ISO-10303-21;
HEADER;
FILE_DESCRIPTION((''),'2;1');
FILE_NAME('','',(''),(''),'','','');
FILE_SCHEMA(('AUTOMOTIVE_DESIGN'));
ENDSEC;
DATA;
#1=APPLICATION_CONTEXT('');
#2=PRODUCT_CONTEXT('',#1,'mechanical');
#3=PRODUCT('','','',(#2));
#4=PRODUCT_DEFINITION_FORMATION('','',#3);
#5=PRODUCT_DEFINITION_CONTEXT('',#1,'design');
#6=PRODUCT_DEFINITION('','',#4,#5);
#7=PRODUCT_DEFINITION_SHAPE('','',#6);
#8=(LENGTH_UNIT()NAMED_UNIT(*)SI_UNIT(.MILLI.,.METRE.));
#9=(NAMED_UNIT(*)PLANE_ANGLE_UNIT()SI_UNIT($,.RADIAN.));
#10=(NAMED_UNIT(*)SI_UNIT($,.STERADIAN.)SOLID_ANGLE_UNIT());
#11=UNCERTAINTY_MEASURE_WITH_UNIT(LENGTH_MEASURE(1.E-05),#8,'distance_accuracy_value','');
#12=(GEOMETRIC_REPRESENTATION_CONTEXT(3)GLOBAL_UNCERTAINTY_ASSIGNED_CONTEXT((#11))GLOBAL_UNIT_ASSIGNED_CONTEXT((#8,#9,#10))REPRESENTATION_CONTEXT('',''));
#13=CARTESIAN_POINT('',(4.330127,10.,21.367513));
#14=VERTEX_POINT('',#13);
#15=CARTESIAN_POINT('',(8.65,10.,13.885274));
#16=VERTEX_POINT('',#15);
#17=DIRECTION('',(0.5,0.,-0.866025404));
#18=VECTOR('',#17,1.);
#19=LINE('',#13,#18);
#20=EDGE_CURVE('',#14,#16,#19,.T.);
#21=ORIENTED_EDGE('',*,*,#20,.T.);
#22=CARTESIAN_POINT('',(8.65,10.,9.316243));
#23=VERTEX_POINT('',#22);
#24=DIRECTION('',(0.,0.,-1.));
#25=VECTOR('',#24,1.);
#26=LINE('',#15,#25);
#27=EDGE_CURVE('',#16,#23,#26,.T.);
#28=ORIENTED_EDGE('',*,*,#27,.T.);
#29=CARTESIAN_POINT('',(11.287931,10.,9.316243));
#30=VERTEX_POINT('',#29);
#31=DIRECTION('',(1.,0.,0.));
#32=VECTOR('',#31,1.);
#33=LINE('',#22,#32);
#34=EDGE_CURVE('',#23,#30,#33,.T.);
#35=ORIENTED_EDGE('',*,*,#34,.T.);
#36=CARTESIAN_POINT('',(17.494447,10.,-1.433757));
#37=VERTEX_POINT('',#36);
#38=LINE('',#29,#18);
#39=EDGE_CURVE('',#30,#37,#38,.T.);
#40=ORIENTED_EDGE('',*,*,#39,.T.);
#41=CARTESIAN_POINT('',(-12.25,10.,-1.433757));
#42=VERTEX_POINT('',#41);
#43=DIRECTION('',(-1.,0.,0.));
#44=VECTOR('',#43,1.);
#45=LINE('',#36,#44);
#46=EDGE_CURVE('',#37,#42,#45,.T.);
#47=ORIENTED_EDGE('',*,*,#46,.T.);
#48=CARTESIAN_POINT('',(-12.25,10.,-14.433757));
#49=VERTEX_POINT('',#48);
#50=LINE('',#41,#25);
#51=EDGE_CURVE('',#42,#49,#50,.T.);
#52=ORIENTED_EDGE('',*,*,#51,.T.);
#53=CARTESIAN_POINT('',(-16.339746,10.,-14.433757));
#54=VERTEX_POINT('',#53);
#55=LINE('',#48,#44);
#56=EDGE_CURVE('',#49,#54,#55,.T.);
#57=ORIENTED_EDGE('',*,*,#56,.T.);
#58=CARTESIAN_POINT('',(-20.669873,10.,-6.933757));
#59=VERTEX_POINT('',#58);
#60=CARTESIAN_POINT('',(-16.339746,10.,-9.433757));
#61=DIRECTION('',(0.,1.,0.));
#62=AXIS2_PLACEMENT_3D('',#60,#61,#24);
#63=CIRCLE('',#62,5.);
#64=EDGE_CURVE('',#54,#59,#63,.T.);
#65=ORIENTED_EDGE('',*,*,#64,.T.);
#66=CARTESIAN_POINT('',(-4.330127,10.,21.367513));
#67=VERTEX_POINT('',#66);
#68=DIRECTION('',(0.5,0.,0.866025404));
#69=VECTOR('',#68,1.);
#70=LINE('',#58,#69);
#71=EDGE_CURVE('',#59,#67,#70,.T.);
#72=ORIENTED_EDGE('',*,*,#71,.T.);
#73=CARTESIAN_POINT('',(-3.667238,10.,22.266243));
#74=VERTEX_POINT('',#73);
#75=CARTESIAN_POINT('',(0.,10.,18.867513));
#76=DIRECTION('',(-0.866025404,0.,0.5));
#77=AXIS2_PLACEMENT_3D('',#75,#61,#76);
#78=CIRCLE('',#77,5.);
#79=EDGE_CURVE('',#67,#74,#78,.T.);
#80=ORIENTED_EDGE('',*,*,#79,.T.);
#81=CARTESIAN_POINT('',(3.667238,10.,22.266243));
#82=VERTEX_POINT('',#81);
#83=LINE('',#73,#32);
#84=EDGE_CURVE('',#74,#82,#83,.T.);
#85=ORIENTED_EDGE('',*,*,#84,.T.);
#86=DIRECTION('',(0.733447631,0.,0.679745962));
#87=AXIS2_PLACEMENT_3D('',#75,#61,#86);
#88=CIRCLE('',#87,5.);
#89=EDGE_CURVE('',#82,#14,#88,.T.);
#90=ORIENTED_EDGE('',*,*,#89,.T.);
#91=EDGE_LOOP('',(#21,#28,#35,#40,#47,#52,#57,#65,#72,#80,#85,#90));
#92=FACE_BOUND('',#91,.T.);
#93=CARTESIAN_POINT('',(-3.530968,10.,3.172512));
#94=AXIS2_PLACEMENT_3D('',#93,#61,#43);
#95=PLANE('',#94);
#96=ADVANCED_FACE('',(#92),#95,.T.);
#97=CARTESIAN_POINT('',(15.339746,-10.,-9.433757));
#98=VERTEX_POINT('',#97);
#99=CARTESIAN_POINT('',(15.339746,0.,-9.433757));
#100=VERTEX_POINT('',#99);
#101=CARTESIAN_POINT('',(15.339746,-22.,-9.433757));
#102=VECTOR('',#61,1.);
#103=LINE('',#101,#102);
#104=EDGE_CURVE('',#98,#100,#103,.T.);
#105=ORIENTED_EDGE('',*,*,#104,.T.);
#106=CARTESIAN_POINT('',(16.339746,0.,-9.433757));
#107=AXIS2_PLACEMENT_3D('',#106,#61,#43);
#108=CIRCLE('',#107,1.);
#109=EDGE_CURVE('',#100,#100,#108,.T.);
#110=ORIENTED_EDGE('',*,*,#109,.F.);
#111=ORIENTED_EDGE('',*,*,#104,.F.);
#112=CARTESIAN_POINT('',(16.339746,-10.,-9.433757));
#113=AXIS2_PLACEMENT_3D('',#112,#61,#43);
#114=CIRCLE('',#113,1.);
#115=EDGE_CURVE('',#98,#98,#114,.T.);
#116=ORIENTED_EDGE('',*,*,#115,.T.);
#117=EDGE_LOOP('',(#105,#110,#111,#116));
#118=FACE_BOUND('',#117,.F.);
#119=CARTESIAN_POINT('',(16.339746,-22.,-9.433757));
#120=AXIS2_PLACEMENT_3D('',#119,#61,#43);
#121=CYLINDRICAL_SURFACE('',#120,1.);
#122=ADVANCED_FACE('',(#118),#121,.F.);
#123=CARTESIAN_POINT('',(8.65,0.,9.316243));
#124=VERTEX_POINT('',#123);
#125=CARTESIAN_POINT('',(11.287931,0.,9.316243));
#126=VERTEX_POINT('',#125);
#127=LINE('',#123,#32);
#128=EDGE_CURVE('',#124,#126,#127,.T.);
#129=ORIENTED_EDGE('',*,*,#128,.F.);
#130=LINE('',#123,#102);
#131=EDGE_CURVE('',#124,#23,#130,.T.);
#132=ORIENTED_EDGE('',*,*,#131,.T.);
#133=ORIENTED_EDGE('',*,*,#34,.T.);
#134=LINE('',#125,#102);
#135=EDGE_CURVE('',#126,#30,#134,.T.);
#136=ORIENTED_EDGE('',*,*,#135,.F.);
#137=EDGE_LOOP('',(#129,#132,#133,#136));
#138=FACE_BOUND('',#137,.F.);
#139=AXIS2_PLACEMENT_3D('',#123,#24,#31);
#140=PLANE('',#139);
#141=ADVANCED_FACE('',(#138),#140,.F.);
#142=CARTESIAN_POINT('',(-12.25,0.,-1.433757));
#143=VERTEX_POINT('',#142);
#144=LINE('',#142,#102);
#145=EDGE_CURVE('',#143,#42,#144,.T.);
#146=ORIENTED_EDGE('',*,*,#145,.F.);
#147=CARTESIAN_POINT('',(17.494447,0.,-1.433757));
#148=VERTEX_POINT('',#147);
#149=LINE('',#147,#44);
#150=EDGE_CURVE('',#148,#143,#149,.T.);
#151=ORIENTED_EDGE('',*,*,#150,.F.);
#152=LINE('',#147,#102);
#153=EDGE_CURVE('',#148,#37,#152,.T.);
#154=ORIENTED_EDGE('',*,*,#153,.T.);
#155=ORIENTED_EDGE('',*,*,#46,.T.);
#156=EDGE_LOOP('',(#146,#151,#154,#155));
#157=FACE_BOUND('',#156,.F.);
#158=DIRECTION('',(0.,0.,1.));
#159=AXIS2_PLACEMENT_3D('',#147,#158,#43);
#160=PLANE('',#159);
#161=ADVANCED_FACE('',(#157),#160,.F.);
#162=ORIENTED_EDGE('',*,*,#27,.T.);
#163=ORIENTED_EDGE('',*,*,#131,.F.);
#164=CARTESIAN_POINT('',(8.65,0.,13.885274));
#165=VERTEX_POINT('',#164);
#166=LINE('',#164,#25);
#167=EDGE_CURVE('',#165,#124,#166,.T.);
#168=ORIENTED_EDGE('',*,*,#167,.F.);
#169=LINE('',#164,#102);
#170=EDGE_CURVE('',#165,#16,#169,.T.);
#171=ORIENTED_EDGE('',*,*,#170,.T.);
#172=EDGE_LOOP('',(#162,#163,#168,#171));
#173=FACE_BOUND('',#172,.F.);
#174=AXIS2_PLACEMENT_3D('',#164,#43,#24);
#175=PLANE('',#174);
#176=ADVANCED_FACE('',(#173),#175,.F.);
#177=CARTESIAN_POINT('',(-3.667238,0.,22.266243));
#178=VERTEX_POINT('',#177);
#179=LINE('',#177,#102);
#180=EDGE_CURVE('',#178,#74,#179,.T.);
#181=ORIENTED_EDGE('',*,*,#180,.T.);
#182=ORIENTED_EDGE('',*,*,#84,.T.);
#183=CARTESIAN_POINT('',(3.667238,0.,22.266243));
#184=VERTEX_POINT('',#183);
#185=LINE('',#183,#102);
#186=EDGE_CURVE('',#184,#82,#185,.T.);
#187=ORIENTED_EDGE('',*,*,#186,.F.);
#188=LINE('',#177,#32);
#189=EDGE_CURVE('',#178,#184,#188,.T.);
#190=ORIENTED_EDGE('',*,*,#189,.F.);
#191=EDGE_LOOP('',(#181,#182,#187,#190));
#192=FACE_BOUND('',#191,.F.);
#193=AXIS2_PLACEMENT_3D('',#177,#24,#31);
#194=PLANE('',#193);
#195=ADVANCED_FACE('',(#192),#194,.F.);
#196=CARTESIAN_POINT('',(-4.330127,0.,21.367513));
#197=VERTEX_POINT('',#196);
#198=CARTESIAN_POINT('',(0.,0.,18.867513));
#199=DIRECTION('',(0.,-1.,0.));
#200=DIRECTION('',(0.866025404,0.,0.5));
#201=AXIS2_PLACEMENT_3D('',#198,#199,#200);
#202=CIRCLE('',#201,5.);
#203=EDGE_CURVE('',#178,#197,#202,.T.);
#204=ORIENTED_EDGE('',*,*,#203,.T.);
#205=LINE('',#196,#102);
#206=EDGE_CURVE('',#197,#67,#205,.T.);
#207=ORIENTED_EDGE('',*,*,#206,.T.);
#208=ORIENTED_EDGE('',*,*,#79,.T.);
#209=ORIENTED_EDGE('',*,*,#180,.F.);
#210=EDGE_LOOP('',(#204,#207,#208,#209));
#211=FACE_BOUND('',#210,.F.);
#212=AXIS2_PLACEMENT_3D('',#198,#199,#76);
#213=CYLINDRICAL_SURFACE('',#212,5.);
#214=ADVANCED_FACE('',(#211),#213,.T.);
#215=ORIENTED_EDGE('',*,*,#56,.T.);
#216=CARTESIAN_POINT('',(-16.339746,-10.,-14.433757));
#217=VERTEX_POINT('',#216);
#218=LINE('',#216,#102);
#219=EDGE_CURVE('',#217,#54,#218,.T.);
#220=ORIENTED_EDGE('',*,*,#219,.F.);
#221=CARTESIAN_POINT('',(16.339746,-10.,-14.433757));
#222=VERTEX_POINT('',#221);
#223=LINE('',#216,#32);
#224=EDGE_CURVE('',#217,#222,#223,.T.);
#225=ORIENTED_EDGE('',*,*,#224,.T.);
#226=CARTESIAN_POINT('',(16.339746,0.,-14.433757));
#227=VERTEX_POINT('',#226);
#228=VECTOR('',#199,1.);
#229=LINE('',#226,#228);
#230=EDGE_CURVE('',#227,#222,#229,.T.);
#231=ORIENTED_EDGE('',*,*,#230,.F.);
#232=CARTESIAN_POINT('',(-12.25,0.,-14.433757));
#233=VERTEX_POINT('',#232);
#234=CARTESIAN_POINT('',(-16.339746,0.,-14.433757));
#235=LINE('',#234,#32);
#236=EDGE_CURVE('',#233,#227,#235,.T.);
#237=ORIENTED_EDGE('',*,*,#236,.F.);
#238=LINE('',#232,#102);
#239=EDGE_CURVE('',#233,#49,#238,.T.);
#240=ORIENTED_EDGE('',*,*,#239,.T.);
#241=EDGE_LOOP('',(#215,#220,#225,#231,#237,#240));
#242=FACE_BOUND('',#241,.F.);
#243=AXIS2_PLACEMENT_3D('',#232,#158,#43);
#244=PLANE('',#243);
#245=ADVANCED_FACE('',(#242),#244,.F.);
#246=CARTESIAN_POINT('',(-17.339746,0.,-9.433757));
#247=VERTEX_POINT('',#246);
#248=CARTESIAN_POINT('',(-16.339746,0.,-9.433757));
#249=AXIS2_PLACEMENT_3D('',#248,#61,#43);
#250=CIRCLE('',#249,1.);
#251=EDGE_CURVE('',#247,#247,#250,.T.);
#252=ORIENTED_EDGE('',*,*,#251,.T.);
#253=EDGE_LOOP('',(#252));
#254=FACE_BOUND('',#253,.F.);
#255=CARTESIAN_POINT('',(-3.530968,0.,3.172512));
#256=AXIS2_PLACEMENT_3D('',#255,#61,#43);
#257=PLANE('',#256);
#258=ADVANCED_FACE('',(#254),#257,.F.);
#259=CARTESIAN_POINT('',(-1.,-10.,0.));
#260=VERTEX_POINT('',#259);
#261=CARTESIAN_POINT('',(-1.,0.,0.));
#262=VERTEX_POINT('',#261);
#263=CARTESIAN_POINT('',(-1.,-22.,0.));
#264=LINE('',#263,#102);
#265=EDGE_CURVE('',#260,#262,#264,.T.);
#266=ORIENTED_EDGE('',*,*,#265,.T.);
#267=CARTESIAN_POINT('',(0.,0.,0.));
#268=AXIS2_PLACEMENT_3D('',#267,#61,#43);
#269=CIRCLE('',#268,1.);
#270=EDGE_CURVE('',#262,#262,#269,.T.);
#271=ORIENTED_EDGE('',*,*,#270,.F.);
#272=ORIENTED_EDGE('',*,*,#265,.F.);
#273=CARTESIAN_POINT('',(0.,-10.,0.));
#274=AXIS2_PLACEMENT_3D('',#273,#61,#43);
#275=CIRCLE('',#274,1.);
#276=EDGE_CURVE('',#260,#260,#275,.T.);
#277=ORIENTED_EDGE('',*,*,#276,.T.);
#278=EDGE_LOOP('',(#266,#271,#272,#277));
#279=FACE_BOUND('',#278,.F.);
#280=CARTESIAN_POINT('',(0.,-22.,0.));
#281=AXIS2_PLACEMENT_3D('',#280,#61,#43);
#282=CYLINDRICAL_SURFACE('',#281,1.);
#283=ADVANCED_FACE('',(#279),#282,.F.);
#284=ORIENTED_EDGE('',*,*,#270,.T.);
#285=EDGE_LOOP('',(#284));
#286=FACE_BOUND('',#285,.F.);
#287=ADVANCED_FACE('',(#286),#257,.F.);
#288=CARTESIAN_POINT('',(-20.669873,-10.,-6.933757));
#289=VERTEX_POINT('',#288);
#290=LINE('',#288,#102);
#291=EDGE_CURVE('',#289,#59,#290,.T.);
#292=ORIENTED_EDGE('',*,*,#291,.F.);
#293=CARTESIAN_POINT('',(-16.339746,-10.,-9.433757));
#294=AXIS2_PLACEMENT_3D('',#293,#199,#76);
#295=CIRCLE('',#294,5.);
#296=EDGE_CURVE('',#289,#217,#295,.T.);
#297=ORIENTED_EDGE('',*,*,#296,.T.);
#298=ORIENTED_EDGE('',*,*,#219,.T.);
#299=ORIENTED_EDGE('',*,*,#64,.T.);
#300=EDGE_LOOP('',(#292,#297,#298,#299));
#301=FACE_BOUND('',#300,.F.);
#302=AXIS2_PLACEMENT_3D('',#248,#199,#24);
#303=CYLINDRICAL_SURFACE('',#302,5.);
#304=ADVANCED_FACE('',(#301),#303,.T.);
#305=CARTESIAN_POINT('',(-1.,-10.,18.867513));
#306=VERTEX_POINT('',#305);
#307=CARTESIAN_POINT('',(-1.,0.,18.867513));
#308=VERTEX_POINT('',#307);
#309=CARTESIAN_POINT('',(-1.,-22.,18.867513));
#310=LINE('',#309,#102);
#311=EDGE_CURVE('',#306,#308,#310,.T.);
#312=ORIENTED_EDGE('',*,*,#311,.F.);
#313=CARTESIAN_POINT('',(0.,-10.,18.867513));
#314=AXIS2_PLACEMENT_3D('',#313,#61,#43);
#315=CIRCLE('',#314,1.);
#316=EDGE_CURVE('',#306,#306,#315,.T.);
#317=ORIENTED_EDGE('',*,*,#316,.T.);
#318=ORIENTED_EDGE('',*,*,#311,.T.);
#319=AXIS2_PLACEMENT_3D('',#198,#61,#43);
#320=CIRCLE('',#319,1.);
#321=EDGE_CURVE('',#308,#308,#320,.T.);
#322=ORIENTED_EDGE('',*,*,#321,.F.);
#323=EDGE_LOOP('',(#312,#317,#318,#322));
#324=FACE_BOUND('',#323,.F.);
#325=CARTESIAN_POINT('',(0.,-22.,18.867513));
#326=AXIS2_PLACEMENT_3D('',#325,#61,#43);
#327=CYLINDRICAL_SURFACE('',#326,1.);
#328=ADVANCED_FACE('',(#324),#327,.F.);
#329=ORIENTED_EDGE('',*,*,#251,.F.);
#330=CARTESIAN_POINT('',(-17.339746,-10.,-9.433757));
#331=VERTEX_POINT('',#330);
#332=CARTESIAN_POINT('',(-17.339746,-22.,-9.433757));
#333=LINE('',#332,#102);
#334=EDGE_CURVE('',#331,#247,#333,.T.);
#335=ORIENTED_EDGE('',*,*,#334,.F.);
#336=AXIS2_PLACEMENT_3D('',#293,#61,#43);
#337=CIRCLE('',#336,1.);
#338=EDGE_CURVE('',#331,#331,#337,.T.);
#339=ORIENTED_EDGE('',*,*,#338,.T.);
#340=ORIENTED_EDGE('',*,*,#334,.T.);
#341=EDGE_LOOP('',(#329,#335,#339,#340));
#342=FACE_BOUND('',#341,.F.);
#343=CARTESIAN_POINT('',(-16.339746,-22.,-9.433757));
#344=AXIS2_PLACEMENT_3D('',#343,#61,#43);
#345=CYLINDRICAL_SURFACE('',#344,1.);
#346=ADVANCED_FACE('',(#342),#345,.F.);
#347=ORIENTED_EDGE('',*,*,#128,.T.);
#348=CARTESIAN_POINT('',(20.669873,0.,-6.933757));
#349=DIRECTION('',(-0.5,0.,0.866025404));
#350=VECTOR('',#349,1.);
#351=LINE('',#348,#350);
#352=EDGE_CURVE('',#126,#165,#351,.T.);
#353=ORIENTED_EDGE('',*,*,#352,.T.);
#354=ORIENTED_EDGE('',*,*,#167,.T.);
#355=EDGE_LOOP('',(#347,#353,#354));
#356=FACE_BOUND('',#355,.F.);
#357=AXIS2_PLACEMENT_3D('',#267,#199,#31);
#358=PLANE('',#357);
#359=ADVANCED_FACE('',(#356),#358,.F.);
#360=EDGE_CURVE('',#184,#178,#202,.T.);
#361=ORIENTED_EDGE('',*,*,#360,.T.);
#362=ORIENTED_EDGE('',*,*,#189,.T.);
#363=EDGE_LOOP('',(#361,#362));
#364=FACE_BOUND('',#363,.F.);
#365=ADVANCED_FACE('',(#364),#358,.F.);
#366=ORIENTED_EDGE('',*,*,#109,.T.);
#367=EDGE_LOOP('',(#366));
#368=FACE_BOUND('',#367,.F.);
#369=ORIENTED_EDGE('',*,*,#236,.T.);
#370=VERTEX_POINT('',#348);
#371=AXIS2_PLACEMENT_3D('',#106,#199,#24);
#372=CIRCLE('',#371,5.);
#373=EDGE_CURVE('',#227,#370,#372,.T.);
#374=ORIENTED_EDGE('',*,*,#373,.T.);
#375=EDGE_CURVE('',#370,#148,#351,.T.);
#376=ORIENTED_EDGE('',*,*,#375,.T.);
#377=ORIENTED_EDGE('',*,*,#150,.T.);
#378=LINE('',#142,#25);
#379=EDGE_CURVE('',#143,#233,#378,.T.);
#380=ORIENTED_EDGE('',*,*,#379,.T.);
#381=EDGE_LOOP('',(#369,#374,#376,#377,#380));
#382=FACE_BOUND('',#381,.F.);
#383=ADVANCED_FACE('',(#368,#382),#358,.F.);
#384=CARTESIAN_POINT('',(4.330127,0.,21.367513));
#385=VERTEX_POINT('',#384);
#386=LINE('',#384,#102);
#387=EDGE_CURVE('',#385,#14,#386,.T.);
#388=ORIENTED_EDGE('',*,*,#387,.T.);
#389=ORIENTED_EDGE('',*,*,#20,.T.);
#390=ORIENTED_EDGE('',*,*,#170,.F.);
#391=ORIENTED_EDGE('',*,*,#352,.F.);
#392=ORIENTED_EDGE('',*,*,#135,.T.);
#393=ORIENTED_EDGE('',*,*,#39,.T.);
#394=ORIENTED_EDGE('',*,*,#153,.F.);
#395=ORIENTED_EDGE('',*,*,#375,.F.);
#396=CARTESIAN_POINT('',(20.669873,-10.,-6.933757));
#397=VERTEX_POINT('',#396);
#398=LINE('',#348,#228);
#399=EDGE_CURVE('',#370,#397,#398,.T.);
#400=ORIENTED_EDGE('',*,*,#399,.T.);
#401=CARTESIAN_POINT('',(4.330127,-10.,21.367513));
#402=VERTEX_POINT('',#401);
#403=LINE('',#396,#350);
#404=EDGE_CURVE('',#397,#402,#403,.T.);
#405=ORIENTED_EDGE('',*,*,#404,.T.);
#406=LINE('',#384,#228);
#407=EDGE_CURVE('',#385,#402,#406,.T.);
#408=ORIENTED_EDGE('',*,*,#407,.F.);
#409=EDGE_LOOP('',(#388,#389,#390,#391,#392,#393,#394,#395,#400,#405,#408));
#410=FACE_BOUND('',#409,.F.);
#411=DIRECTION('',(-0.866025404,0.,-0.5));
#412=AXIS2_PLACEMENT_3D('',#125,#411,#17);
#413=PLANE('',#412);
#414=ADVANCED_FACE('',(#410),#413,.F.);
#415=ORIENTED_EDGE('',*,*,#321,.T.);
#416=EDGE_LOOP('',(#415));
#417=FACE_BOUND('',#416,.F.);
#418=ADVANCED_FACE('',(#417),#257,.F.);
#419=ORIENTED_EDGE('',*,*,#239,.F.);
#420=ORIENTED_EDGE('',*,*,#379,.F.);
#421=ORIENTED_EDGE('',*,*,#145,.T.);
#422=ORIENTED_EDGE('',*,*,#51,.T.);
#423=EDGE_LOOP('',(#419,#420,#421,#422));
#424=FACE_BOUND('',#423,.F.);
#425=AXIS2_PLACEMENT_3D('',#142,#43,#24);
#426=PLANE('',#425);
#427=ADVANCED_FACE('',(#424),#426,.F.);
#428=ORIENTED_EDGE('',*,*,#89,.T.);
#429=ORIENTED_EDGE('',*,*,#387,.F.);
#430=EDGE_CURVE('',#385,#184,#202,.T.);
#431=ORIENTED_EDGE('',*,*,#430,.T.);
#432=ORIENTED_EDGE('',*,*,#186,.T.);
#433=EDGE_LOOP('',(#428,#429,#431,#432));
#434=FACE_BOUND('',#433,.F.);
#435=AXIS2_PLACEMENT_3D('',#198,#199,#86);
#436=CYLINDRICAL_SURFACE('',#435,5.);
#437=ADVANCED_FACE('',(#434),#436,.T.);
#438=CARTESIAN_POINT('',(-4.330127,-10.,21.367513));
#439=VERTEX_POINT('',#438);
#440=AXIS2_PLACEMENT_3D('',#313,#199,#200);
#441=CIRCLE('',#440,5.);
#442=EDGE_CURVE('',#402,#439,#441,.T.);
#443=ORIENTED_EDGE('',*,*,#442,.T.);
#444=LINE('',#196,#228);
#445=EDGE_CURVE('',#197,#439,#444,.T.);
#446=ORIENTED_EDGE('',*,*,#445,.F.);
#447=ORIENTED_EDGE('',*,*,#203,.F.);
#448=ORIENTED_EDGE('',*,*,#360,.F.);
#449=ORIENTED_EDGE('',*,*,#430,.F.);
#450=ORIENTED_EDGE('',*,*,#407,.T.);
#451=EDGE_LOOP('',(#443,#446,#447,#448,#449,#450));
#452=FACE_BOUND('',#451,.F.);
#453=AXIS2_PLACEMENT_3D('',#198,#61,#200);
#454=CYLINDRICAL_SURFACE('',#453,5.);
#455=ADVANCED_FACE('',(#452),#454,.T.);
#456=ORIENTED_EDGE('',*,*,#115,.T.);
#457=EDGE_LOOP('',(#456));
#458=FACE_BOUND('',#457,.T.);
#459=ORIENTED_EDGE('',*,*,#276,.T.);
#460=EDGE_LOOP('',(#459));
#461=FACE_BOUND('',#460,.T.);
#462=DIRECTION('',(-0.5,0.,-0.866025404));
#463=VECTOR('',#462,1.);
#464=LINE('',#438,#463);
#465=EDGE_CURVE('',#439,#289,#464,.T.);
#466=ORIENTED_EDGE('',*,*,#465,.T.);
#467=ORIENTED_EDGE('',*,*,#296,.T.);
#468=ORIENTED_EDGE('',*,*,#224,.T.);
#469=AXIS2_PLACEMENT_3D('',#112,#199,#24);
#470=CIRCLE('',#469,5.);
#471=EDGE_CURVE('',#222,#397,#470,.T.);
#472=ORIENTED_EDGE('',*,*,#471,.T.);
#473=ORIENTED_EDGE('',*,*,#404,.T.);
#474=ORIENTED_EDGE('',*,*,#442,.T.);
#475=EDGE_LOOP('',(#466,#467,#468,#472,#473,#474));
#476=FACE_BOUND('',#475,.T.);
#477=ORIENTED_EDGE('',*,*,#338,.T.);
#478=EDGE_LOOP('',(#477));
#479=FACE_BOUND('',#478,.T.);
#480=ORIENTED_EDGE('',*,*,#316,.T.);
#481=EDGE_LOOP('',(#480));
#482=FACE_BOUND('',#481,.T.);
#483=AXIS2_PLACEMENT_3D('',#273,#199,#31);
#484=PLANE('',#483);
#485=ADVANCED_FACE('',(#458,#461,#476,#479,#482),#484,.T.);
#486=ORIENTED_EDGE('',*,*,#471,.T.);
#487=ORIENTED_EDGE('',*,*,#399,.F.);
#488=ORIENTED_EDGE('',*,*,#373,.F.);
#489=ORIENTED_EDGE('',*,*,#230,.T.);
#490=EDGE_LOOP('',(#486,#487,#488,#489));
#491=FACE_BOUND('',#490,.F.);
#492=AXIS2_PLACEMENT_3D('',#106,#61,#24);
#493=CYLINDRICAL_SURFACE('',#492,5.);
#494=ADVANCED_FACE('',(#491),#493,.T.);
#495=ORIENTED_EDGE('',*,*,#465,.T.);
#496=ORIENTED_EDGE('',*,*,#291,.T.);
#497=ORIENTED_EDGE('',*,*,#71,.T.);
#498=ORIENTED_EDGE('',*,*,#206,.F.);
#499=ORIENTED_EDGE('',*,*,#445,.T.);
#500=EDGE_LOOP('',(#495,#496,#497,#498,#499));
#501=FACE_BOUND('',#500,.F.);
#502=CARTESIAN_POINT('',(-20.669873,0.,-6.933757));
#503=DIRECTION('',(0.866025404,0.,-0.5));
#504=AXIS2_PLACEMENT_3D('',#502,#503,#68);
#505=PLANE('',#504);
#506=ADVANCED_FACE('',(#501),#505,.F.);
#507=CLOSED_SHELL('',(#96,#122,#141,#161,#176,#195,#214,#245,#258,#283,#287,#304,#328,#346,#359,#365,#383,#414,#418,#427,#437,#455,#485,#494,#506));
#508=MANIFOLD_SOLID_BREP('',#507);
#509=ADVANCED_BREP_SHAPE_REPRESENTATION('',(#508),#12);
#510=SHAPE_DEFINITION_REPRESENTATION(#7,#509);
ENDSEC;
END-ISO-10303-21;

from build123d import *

# Parameters (mm, degrees)
F1_DEPTH = 10
F3_D     = 2
F3_DEPTH = 12
F3_TIP   = 0.600860619
F4_R     = 1
F5_DEPTH = 10


with BuildPart() as f1:
    # F0 (on Front) → F1 (new body)
    with BuildSketch(Plane.XZ):
        with BuildLine():
            Line((-4.3301270189, 21.3675134595), (-20.6698729811, -6.9337567297))
            ThreePointArc((-20.6698729811, -6.9337567297), (-20.6698729811, -11.9337567297), (-16.3397459622, -14.4337567297))
            Line((-16.3397459622, -14.4337567297), (16.3397459622, -14.4337567297))
            ThreePointArc((16.3397459622, -14.4337567297), (20.6698729811, -11.9337567297), (20.6698729811, -6.9337567297))
            Line((20.6698729811, -6.9337567297), (4.3301270189, 21.3675134595))
            ThreePointArc((4.3301270189, 21.3675134595), (0, 23.8675134595), (-4.3301270189, 21.3675134595))
        make_face()
    extrude(amount=F1_DEPTH)

    # F3
    with Locations(Plane.XZ.offset(10)):
        with Locations((0, 18.8675134595), (0, 0), (16.3397459622, -9.4337567297), (-16.3397459622, -9.4337567297)):
            Hole(F3_D / 2, depth=F3_DEPTH)
            with Locations((0, 0, -(F3_DEPTH + F3_TIP / 2))):  # 118° drill point
                Cone(0, F3_D / 2, F3_TIP, mode=Mode.SUBTRACT)

    # F4 (on face) → F5 (join)
    with BuildSketch(Plane(origin=(0, 0, 0), x_dir=(-1, 0, 0), z_dir=(0, 1, 0))):
        with BuildLine():
            Line((-11.2879311067, 9.3162432703), (-17.4944465005, -1.4337567297))
            Line((-17.4944465005, -1.4337567297), (12.25, -1.4337567297))
            Line((12.25, -1.4337567297), (12.25, -14.4337567297))
            Line((12.25, -14.4337567297), (16.3397459622, -14.4337567297))
            ThreePointArc((16.3397459622, -14.4337567297), (20.6698729811, -11.9337567297), (20.6698729811, -6.9337567297))
            Line((20.6698729811, -6.9337567297), (4.3301270189, 21.3675134595))
            ThreePointArc((4.3301270189, 21.3675134595), (4.0238527859, 21.8354435053), (3.6672381533, 22.2662432703))
            Line((3.6672381533, 22.2662432703), (-3.6672381533, 22.2662432703))
            ThreePointArc((-3.6672381533, 22.2662432703), (-4.0238527859, 21.8354435053), (-4.3301270189, 21.3675134595))
            Line((-4.3301270189, 21.3675134595), (-8.65, 13.885273974))
            Line((-8.65, 13.885273974), (-8.65, 9.3162432703))
            Line((-8.65, 9.3162432703), (-11.2879311067, 9.3162432703))
        make_face()
        with Locations((16.3397459622, -9.4337567297)):
            Circle(F4_R, mode=Mode.SUBTRACT)
        Circle(F4_R, mode=Mode.SUBTRACT)
        with Locations((0, 18.8675134595)):
            Circle(F4_R, mode=Mode.SUBTRACT)
        with Locations((16.3397459622, -9.4337567297)):
            Circle(F4_R)
        Circle(F4_R)
        with Locations((0, 18.8675134595)):
            Circle(F4_R)
    extrude(amount=F5_DEPTH)


solid = f1.part
